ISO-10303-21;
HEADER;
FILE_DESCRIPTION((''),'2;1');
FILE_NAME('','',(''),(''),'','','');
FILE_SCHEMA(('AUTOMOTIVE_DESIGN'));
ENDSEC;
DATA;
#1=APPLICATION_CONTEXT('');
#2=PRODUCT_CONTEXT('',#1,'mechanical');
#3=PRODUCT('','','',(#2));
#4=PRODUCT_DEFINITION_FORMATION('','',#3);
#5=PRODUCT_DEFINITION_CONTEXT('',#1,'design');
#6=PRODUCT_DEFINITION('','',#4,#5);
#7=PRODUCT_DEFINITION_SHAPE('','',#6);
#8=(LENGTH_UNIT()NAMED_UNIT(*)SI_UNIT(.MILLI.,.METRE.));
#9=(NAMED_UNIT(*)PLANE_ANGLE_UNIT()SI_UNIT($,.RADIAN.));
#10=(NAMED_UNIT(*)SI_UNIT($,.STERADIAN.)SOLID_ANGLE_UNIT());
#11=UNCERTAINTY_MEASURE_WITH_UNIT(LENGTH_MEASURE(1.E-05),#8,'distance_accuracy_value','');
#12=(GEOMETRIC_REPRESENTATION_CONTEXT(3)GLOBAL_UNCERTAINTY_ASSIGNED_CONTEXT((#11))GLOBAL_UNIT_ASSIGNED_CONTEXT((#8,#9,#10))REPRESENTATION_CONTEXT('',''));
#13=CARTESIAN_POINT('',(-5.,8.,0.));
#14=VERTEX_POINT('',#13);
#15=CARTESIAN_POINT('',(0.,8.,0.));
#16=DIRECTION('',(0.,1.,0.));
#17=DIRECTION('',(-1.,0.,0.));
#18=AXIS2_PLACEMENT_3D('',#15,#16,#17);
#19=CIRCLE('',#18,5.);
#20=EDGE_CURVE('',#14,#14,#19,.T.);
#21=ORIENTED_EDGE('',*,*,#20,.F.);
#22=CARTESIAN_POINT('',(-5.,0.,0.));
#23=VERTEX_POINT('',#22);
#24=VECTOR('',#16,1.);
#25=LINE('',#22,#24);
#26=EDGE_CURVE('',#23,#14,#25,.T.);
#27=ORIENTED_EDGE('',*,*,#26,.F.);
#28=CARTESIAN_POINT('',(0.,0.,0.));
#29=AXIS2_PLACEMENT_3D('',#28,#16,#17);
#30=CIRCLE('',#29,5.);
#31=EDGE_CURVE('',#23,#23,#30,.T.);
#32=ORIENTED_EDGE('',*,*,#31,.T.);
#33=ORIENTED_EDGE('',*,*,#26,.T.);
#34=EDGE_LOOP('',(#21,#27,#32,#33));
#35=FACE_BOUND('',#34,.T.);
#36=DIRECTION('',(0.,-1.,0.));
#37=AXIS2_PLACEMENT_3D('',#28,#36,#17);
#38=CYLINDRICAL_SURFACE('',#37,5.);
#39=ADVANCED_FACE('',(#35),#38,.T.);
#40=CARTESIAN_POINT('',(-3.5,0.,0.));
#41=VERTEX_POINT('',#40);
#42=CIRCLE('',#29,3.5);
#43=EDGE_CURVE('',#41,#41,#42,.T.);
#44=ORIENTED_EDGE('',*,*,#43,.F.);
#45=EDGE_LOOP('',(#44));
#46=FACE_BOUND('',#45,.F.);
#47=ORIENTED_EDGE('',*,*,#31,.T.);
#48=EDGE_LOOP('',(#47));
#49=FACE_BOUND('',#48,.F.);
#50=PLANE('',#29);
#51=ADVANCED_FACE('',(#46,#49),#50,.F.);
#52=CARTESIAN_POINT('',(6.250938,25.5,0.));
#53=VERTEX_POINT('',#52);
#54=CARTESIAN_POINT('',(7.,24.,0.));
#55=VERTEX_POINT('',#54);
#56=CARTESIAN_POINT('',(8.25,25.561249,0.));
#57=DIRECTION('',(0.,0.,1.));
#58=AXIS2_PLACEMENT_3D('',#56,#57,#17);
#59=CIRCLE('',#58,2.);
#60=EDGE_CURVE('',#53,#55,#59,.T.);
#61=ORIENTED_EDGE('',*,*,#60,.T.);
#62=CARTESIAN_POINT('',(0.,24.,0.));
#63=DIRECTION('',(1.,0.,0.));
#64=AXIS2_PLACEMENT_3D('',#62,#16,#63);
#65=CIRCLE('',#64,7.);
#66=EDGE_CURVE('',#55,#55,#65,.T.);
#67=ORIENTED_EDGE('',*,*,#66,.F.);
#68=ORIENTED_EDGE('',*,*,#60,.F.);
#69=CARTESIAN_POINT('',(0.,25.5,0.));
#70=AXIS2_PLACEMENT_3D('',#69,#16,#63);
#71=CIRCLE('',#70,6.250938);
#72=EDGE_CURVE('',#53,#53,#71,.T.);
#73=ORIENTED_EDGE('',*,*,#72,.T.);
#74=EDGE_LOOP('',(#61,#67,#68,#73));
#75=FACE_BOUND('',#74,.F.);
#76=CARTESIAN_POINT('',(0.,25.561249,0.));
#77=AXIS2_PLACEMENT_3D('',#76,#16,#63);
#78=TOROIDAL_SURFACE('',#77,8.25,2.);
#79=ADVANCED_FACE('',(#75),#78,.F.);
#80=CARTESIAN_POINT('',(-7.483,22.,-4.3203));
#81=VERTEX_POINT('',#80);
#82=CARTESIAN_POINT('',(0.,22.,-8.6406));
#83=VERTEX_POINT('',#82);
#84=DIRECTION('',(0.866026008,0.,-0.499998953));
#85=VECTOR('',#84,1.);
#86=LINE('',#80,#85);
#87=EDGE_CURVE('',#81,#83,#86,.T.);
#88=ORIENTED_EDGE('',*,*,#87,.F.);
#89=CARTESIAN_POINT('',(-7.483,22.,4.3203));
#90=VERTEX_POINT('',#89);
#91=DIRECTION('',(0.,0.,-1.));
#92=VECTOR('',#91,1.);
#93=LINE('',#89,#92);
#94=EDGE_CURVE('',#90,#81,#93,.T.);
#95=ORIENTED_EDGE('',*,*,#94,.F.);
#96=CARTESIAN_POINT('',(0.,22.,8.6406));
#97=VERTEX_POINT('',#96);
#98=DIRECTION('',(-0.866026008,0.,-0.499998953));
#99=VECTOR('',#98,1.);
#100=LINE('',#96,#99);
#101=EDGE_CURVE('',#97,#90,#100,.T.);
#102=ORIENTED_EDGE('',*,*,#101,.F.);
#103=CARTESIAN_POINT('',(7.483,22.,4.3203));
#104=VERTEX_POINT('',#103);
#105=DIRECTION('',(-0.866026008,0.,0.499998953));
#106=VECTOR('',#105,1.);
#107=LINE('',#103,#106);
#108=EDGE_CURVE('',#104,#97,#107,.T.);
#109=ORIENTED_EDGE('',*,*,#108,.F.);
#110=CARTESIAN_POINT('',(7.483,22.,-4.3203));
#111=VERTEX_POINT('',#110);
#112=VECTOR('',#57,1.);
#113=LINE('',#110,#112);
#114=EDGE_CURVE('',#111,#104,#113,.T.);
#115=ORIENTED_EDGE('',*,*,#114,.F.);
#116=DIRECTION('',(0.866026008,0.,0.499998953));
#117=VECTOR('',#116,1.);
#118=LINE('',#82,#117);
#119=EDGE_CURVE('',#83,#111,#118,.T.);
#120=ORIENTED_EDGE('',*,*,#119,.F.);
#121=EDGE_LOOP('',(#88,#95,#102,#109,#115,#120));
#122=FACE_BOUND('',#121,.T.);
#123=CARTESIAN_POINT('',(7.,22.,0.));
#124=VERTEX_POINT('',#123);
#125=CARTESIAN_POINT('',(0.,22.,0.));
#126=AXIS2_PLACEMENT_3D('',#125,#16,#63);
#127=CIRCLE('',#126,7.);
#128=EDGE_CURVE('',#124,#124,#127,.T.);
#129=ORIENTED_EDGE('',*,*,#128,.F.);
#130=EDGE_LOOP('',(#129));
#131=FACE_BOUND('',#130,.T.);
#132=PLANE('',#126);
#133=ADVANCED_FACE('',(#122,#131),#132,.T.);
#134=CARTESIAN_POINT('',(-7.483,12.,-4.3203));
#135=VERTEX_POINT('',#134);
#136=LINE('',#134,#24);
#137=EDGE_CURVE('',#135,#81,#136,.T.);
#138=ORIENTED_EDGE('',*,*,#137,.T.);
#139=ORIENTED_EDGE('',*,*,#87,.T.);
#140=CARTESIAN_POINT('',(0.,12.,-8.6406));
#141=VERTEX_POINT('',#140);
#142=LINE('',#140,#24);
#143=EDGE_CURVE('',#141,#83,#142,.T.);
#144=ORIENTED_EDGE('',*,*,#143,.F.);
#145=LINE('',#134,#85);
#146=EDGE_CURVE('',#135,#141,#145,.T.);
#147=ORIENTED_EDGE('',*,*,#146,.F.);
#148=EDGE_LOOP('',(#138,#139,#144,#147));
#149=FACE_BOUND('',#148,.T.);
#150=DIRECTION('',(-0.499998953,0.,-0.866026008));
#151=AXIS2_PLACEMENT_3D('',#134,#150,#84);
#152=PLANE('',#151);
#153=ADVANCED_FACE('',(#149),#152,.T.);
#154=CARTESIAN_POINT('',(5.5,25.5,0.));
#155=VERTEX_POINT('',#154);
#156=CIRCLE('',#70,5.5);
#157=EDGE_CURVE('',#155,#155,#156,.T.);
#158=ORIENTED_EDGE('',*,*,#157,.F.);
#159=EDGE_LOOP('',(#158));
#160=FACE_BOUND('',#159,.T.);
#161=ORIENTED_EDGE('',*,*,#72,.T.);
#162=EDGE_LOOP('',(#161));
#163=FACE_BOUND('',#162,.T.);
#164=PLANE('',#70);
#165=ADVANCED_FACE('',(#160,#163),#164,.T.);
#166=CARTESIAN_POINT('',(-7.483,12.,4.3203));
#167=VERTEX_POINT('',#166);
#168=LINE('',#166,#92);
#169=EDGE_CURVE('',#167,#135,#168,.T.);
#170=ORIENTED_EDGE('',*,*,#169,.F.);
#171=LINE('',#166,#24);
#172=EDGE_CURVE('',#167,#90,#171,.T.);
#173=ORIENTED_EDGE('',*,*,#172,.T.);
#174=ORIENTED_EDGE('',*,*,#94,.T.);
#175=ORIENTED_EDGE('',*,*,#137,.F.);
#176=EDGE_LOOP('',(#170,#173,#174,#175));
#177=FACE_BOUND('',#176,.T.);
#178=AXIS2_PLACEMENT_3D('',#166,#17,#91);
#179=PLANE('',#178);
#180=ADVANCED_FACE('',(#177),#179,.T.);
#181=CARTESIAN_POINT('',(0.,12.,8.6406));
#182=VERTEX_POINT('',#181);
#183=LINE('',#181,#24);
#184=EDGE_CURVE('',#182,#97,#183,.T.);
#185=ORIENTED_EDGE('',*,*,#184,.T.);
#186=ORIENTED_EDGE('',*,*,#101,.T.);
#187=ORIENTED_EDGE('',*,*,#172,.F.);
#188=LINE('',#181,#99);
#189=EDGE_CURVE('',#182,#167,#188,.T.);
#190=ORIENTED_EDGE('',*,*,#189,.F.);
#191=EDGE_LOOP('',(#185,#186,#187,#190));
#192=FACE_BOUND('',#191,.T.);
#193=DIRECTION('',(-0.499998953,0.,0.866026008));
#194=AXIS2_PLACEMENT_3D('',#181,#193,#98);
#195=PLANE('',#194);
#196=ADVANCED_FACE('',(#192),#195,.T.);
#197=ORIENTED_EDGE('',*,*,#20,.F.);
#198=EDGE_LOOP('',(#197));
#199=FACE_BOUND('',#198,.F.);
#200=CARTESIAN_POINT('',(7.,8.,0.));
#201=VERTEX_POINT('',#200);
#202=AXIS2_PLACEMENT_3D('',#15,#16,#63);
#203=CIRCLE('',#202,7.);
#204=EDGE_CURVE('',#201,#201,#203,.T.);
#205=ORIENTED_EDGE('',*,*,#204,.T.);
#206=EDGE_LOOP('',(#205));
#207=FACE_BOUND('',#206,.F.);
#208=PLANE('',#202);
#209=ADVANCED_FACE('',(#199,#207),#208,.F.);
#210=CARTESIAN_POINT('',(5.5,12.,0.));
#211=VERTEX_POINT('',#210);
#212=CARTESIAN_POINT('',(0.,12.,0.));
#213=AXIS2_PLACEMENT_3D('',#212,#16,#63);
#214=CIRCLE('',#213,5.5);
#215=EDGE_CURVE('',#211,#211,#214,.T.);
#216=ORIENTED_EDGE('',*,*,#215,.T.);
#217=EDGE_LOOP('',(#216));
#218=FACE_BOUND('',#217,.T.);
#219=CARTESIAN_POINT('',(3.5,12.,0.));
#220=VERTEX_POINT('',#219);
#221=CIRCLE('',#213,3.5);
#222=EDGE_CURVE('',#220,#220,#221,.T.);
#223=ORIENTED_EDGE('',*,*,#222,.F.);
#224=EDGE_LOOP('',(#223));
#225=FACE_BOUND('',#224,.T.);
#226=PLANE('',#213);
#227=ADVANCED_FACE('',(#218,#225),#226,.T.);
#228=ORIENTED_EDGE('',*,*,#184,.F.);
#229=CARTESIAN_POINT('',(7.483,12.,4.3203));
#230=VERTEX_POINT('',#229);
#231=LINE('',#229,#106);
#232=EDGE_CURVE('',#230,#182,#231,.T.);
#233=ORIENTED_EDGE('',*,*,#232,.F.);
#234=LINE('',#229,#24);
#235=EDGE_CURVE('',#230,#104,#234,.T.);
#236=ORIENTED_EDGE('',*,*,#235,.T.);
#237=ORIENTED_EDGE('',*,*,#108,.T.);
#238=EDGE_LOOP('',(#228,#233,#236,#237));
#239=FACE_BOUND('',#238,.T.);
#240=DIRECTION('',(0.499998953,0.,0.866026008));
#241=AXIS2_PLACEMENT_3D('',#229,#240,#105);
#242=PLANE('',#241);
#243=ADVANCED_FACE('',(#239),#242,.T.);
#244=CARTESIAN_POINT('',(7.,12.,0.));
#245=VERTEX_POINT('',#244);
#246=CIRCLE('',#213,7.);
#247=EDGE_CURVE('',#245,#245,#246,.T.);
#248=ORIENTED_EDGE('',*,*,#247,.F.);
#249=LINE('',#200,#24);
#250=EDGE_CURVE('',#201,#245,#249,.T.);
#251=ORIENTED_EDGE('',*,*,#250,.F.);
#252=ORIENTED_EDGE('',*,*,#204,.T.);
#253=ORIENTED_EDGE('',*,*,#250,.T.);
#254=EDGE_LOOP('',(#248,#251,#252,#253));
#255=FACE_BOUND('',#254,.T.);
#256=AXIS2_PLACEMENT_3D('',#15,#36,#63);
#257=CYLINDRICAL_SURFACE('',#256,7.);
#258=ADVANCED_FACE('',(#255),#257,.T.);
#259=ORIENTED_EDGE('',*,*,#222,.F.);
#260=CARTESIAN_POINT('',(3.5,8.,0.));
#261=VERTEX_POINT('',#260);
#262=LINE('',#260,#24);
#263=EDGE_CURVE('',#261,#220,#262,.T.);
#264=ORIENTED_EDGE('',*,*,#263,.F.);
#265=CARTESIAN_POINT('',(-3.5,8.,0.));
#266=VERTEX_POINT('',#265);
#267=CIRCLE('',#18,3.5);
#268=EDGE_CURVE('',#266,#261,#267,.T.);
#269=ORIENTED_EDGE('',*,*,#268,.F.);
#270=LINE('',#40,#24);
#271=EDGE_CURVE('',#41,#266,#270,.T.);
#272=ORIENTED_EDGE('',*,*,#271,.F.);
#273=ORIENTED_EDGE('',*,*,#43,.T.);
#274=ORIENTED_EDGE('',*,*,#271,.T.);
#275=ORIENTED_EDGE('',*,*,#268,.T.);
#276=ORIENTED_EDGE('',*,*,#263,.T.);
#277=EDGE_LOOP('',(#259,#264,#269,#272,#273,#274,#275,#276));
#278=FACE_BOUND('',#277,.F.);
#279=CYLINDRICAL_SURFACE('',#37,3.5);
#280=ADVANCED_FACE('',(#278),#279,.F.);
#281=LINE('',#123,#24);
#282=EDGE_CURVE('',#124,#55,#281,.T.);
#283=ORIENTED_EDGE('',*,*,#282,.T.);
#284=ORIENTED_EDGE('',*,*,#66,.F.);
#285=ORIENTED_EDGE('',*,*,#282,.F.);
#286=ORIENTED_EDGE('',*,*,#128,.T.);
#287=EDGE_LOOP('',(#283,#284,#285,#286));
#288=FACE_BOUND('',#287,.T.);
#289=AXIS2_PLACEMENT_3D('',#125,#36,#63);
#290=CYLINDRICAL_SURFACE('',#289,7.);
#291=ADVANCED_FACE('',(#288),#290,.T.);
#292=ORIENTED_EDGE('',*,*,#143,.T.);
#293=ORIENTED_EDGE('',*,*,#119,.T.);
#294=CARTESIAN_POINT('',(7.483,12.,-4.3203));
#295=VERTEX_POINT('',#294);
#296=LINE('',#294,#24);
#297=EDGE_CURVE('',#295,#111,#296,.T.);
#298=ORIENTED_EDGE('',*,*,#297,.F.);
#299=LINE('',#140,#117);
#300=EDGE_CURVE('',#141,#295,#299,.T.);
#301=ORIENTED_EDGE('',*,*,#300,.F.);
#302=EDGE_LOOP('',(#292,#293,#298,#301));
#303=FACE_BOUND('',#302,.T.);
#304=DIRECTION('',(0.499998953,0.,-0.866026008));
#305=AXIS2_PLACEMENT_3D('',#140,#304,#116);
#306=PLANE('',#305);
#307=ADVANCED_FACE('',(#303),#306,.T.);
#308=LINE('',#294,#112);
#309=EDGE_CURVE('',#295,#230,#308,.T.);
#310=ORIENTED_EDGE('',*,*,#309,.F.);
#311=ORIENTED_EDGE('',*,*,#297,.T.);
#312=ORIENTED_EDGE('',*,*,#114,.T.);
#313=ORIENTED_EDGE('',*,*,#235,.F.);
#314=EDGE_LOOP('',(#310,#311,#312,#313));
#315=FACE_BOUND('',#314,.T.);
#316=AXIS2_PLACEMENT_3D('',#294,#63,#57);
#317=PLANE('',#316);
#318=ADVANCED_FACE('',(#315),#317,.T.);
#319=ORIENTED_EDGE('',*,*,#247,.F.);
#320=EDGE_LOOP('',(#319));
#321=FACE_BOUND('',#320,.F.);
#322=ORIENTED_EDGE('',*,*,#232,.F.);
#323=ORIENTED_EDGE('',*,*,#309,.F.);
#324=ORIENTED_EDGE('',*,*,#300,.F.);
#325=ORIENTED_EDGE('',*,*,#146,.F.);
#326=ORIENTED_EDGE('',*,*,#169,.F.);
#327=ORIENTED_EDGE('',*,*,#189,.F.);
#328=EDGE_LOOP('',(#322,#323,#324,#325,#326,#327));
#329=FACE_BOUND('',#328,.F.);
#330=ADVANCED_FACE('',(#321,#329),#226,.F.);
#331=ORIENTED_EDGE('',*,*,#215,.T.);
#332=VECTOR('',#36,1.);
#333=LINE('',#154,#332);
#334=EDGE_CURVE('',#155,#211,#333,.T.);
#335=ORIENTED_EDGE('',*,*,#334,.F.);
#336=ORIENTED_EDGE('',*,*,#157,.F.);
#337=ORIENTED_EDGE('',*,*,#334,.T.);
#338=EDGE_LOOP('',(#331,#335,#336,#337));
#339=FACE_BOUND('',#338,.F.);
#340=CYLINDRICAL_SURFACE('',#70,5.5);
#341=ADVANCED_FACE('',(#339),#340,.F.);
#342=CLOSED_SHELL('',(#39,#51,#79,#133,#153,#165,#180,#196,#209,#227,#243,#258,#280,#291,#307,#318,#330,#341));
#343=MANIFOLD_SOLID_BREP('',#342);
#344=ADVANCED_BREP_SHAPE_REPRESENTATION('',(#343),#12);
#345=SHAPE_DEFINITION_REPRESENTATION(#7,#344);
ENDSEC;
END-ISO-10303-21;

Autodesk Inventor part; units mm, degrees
ref_plane "YZ Plane" through (0, 0, 0) normal (1, 0, 0) x (0, 1, 0)
ref_plane "XZ Plane" through (0, 0, 0) normal (0, 1, 0) x (-1, 0, 0)
ref_plane "XY Plane" through (0, 0, 0) normal (0, 0, 1) x (1, 0, 0)
sketch "Sketch1" plane through (0, 0, 0) normal (0, 1, 0) x (-1, 0, 0)
  circle A0 centre (0, 0) radius 5
  circle A1 centre (0, 0) radius 3.5
  dimension "d0" = 10
  dimension "d1" = 7
extrude "Extrusion1" add sketch "Sketch1" along normal blind 8
sketch "Sketch2" plane through (0, 8, 0) normal (0, 1, 0) x (1, 0, 0)
  circle A0 centre (0, 0) radius 7
  circle A1 centre (0, 0) radius 5 projected
  circle A2 centre (0, 0) radius 3.5 projected
  dimension "d4" = 14
extrude "Extrusion2" add sketch "Sketch2" along normal blind 4 contours A0 | A1
sketch "Sketch3" plane through (0, 12, 0) normal (0, 1, 0) x (1, 0, 0)
  line L0 (-7.483, 4.3203) -> (0, 8.6406)
  line L1 (0, 8.6406) -> (7.483, 4.3203)
  line L2 (7.483, 4.3203) -> (7.483, -4.3203)
  line L3 (7.483, -4.3203) -> (0, -8.6406)
  line L4 (0, -8.6406) -> (-7.483, -4.3203)
  line L5 (-7.483, -4.3203) -> (-7.483, 4.3203)
  circle A0 centre (0, 0) radius 5 projected
extrude "Extrusion3" add sketch "Sketch3" along normal blind 10
sketch "Sketch4" plane through (0, 22, 0) normal (0, 1, 0) x (1, 0, 0)
  circle A0 centre (0, 0) radius 3.5 projected
  circle A1 centre (0, 0) radius 7
  circle A2 centre (0, 0) radius 5 projected
  circle A3 centre (0, 0) radius 5
  dimension "d9" = 14
extrude "Extrusion4" add sketch "Sketch4" along normal blind 2 contours A1
sketch "Sketch5" plane through (0, 24, 0) normal (0, 1, 0) x (1, 0, 0)
  circle A0 centre (0, 0) radius 6.25
  circle A1 centre (0, 0) radius 5
  dimension "d12" = 12.5
extrude "Extrusion5" add sketch "Sketch5" along normal blind 1.5
fillet "Fillet1" radius 2 1 edges at (-6.25, 24, 0)
thread "Thread1" size "M10x1.5" class "6g" standard "ANSI Metric M Profile" full length
sketch "Sketch6" plane through (0, 25.5, 0) normal (0, 1, 0) x (1, 0, 0)
  circle A0 centre (0, 0) radius 5.5
  dimension "d18" = 11
extrude "Extrusion6" cut sketch "Sketch6" against normal blind 13.5
sketch "Sketch7" plane through (0, 25.5, 0) normal (0, 1, 0) x (1, 0, 0)
  circle A0 centre (0, 0) radius 5.5 projected
properties part number "entrada_manguera_alicat_presion"
